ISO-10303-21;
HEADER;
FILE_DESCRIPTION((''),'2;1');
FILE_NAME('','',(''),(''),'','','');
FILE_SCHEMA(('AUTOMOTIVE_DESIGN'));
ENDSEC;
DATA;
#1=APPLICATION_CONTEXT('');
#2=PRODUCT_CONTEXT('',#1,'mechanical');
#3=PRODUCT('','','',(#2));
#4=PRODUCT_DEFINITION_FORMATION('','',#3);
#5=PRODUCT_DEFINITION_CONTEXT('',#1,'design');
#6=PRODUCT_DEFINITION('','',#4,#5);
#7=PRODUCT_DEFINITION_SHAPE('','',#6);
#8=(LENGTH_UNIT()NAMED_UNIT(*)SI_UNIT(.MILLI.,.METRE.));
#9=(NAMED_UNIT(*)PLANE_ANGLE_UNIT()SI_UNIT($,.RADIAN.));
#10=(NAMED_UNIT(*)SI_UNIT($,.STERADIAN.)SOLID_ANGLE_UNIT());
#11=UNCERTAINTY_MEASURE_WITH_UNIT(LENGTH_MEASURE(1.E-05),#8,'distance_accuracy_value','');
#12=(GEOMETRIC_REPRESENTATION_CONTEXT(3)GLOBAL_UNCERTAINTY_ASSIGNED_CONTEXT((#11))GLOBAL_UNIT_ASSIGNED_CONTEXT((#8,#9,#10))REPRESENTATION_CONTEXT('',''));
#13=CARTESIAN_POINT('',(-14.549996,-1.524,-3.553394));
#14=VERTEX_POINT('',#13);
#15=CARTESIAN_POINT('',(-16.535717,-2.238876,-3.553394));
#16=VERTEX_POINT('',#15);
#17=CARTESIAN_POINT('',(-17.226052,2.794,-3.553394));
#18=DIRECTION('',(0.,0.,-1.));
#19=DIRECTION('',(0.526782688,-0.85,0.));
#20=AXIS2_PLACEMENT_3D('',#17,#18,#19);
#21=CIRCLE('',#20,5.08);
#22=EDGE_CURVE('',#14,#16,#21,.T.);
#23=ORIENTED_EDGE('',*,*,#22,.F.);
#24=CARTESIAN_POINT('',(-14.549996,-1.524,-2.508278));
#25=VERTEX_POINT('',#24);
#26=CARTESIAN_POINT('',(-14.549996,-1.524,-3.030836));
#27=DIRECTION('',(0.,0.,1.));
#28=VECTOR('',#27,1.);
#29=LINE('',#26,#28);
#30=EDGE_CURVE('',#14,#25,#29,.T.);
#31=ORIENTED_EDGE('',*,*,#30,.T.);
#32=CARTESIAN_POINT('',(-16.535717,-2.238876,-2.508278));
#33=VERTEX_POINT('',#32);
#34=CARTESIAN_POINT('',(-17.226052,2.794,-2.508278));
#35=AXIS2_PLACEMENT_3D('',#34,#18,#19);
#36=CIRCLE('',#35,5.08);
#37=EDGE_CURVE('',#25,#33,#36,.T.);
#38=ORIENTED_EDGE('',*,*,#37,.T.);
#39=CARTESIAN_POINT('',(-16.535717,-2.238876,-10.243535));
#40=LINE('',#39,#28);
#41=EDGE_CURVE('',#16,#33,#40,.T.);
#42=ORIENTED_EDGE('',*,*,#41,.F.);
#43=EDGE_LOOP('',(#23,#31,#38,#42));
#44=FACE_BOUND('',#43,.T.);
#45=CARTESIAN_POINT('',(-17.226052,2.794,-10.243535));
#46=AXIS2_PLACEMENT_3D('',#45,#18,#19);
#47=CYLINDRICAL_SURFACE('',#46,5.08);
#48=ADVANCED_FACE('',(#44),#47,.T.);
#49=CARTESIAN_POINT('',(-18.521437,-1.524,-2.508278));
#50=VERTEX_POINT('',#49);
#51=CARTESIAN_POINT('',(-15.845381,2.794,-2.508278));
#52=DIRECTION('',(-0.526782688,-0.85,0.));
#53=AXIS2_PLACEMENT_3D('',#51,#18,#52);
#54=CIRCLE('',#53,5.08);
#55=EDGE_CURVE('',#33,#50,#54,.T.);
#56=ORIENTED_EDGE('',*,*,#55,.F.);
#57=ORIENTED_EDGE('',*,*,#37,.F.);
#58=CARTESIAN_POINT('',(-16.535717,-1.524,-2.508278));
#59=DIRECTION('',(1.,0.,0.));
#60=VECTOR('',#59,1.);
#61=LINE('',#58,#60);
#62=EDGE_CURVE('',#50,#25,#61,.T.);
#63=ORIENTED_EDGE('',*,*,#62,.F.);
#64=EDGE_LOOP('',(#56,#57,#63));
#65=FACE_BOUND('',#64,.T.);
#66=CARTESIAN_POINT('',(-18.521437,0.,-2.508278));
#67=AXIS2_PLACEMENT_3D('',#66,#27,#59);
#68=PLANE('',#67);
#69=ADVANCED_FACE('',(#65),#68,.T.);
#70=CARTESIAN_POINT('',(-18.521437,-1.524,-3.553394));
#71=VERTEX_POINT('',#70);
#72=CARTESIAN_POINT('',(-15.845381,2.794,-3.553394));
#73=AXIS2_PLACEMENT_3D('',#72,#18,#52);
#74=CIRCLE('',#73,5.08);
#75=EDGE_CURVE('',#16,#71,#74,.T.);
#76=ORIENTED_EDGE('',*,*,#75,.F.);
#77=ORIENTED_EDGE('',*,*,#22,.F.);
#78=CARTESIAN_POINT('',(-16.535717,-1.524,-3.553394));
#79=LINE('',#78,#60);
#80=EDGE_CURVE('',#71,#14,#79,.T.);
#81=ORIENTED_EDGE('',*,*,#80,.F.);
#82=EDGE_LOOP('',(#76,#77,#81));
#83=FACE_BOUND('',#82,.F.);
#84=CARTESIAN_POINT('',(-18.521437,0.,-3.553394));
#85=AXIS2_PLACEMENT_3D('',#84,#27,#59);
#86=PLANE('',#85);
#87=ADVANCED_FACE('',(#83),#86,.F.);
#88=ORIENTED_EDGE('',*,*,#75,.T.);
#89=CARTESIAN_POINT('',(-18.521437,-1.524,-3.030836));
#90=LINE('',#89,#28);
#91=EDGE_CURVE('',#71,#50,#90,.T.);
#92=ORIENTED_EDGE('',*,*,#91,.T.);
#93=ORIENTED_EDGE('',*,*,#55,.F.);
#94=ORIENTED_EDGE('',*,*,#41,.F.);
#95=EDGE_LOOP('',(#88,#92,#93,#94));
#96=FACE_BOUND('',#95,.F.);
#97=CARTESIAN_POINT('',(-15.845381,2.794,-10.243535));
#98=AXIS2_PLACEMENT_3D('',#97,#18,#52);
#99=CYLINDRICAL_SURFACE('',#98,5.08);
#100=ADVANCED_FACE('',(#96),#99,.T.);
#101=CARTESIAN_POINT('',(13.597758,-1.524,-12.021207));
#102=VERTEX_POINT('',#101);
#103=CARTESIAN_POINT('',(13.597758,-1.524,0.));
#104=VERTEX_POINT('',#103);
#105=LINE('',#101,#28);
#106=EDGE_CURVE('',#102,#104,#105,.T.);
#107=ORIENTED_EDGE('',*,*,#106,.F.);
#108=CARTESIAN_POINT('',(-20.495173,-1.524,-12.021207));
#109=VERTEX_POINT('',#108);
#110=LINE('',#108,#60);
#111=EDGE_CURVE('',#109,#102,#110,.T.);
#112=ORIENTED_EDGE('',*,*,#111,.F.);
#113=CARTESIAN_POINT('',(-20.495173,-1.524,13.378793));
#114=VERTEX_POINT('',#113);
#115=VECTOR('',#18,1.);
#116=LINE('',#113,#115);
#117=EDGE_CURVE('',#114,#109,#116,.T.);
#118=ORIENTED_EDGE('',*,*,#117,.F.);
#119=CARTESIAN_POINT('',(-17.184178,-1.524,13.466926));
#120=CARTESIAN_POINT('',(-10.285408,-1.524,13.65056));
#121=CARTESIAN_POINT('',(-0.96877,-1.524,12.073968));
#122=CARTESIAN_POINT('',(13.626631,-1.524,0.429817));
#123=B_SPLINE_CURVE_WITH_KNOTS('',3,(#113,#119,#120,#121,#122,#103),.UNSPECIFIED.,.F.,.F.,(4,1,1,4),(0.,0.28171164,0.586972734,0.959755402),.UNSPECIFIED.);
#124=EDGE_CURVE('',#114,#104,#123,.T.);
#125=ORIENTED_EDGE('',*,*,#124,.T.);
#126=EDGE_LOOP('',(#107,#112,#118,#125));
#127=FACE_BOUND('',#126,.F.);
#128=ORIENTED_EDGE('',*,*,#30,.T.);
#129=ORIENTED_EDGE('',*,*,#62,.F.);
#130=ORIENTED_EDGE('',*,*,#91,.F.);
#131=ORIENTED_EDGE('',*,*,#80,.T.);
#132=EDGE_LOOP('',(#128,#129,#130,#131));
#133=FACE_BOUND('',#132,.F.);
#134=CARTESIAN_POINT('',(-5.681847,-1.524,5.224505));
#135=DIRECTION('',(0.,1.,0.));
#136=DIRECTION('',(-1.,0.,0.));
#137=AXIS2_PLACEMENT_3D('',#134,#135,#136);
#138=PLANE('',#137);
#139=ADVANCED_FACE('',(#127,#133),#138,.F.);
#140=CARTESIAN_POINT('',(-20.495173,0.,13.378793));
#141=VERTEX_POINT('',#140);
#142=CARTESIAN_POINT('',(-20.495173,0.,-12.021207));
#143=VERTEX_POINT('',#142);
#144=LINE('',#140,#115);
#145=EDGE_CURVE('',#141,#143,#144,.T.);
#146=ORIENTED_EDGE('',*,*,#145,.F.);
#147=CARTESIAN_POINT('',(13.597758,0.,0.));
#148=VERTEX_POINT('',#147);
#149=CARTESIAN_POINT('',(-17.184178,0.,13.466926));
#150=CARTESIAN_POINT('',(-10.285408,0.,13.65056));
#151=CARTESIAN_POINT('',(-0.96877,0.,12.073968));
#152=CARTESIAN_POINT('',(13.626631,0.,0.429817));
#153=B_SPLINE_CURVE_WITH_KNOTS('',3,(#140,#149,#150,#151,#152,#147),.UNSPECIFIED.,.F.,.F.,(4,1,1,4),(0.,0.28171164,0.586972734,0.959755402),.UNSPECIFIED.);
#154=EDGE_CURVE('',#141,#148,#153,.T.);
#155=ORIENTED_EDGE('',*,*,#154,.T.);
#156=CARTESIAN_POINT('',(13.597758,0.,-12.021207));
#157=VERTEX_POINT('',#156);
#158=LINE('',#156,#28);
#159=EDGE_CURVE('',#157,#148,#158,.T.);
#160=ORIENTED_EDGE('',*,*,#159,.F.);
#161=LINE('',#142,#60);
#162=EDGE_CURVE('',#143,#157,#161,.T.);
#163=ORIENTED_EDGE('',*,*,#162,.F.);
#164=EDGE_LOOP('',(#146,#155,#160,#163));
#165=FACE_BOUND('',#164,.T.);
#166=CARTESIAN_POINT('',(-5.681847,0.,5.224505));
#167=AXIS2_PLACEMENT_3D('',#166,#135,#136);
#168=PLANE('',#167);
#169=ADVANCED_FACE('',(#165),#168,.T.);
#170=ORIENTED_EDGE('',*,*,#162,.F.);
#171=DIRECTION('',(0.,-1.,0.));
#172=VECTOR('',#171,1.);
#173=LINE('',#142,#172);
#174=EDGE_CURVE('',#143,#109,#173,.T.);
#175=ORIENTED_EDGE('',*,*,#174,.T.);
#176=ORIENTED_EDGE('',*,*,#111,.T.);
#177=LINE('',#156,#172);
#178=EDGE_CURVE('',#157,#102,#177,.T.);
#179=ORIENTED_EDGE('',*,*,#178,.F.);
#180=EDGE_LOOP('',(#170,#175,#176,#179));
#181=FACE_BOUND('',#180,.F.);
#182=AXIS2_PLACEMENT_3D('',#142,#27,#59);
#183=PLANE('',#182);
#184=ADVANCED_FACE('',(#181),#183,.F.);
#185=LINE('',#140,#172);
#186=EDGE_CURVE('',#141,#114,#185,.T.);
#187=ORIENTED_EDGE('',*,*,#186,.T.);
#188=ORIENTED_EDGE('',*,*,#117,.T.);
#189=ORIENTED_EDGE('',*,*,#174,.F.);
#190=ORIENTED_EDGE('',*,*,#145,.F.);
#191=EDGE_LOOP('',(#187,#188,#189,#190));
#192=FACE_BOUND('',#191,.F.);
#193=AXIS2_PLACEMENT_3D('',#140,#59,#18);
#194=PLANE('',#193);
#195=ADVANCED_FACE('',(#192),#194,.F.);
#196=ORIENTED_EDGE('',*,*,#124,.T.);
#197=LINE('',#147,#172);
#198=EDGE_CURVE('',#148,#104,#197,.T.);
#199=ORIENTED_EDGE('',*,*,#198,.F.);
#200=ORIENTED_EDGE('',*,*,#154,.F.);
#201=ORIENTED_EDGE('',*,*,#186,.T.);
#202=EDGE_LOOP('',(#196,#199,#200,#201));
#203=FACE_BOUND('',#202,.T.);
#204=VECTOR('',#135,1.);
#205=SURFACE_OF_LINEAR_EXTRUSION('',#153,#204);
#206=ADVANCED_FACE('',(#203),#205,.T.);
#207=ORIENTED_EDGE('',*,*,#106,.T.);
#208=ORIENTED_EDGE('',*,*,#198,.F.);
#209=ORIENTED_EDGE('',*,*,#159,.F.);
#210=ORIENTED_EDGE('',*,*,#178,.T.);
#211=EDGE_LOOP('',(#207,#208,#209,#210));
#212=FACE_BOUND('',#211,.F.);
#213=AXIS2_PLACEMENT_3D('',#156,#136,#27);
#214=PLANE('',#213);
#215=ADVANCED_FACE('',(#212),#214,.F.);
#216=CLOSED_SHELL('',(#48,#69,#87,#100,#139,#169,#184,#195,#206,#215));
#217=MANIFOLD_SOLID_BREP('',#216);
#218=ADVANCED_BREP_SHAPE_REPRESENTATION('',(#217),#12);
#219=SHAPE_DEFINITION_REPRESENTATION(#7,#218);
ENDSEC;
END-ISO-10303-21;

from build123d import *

# Parameters (mm, degrees)
F0_W        = 3.9714416489
F0_H        = 1.0451159906
F1_DEPTH    = 1.524
F2_DEPTH    = 2.286
F3_T1_DEPTH = 14.4253962567


# Not quite as in the source:
# - a fillet or chamfer that OpenCascade refuses, or shapes differently, is made with other operations: its cross-section is extruded or revolved along the edge and cut away or added
# - a feature names something its author has since deleted; it is built from what else it names


with BuildPart() as f1:
    # F0 (on Front) → F1 (new body)
    with BuildSketch(Plane.XZ):
        with BuildLine():
            add(Edge.make_bspline(
                [(-20.49517259, 13.3787927493), (-17.1841776189, 13.4669259304), (-10.2854077584, 13.6505597138), (-0.9687704074, 12.0739679533), (13.6266309982, 0.4298166184), (13.5977584869, 0)],
                knots=[0, 0, 0, 0, 0.2817116399, 0.5869727341, 0.9597554024, 0.9597554024, 0.9597554024, 0.9597554024], degree=3))
            Line((-20.49517259, 13.3787927493), (-20.49517259, 0))
            Line((-20.49517259, 0), (13.4006887674, 0))
            Line((13.4006887674, 0), (13.5977584869, 0))
        make_face()
        with BuildLine():
            add(Edge.make_bspline(
                [(13.5977584869, 0), (13.5946414895, -0.0464018269), (13.4976651285, -0.0232009135), (13.4006887674, 0)],
                knots=[0.9597554024, 0.9597554024, 0.9597554024, 0.9597554024, 1, 1, 1, 1], degree=3))
            Line((13.5977584869, 0), (13.4006887674, 0))
        make_face()
        with BuildLine():
            Line((13.4006887674, 0), (-20.49517259, 0))
            Line((-20.49517259, 0), (-20.49517259, -12.0212072507))
            Line((-20.49517259, -12.0212072507), (13.5977584869, -12.0212072507))
            Line((13.5977584869, -12.0212072507), (13.5977584869, 0))
            add(Edge.make_bspline(
                [(13.5977584869, 0), (13.5946414895, -0.0464018269), (13.4976651285, -0.0232009135), (13.4006887674, 0)],
                knots=[0.9597554024, 0.9597554024, 0.9597554024, 0.9597554024, 1, 1, 1, 1], degree=3))
        make_face()
        with Locations((-16.535716597, -3.0308364658)):
            Rectangle(F0_W, F0_H, mode=Mode.SUBTRACT)
    extrude(amount=F1_DEPTH)

    # F0 (on Front) → F2 (join)
    with BuildSketch(Plane.XZ):
        with Locations((-16.535716597, -3.0308364658)):
            Rectangle(F0_W, F0_H)
    extrude(amount=F2_DEPTH)

    # F3: fillet of radius 5.08 on 2 edges, made by hand

    # F3_s2 → F3_t1 (cut)
    with BuildSketch(Plane.XY.offset(-10.2435345941)):
        with BuildLine():
            ThreePointArc((-18.5214374214, -1.524), (-17.2365966643, -2.0917875517), (-15.8453813682, -2.286))
            Line((-15.8453813682, -2.286), (-18.5214374214, -2.286))
            Line((-18.5214374214, -2.286), (-18.5214374214, -1.524))
        make_face()
        with BuildLine():
            ThreePointArc((-14.5499957725, -1.524), (-15.8348365297, -2.0917875517), (-17.2260518258, -2.286))
            Line((-17.2260518258, -2.286), (-14.5499957725, -2.286))
            Line((-14.5499957725, -2.286), (-14.5499957725, -1.524))
        make_face()
    extrude(amount=F3_T1_DEPTH, mode=Mode.SUBTRACT)


solid = f1.part
